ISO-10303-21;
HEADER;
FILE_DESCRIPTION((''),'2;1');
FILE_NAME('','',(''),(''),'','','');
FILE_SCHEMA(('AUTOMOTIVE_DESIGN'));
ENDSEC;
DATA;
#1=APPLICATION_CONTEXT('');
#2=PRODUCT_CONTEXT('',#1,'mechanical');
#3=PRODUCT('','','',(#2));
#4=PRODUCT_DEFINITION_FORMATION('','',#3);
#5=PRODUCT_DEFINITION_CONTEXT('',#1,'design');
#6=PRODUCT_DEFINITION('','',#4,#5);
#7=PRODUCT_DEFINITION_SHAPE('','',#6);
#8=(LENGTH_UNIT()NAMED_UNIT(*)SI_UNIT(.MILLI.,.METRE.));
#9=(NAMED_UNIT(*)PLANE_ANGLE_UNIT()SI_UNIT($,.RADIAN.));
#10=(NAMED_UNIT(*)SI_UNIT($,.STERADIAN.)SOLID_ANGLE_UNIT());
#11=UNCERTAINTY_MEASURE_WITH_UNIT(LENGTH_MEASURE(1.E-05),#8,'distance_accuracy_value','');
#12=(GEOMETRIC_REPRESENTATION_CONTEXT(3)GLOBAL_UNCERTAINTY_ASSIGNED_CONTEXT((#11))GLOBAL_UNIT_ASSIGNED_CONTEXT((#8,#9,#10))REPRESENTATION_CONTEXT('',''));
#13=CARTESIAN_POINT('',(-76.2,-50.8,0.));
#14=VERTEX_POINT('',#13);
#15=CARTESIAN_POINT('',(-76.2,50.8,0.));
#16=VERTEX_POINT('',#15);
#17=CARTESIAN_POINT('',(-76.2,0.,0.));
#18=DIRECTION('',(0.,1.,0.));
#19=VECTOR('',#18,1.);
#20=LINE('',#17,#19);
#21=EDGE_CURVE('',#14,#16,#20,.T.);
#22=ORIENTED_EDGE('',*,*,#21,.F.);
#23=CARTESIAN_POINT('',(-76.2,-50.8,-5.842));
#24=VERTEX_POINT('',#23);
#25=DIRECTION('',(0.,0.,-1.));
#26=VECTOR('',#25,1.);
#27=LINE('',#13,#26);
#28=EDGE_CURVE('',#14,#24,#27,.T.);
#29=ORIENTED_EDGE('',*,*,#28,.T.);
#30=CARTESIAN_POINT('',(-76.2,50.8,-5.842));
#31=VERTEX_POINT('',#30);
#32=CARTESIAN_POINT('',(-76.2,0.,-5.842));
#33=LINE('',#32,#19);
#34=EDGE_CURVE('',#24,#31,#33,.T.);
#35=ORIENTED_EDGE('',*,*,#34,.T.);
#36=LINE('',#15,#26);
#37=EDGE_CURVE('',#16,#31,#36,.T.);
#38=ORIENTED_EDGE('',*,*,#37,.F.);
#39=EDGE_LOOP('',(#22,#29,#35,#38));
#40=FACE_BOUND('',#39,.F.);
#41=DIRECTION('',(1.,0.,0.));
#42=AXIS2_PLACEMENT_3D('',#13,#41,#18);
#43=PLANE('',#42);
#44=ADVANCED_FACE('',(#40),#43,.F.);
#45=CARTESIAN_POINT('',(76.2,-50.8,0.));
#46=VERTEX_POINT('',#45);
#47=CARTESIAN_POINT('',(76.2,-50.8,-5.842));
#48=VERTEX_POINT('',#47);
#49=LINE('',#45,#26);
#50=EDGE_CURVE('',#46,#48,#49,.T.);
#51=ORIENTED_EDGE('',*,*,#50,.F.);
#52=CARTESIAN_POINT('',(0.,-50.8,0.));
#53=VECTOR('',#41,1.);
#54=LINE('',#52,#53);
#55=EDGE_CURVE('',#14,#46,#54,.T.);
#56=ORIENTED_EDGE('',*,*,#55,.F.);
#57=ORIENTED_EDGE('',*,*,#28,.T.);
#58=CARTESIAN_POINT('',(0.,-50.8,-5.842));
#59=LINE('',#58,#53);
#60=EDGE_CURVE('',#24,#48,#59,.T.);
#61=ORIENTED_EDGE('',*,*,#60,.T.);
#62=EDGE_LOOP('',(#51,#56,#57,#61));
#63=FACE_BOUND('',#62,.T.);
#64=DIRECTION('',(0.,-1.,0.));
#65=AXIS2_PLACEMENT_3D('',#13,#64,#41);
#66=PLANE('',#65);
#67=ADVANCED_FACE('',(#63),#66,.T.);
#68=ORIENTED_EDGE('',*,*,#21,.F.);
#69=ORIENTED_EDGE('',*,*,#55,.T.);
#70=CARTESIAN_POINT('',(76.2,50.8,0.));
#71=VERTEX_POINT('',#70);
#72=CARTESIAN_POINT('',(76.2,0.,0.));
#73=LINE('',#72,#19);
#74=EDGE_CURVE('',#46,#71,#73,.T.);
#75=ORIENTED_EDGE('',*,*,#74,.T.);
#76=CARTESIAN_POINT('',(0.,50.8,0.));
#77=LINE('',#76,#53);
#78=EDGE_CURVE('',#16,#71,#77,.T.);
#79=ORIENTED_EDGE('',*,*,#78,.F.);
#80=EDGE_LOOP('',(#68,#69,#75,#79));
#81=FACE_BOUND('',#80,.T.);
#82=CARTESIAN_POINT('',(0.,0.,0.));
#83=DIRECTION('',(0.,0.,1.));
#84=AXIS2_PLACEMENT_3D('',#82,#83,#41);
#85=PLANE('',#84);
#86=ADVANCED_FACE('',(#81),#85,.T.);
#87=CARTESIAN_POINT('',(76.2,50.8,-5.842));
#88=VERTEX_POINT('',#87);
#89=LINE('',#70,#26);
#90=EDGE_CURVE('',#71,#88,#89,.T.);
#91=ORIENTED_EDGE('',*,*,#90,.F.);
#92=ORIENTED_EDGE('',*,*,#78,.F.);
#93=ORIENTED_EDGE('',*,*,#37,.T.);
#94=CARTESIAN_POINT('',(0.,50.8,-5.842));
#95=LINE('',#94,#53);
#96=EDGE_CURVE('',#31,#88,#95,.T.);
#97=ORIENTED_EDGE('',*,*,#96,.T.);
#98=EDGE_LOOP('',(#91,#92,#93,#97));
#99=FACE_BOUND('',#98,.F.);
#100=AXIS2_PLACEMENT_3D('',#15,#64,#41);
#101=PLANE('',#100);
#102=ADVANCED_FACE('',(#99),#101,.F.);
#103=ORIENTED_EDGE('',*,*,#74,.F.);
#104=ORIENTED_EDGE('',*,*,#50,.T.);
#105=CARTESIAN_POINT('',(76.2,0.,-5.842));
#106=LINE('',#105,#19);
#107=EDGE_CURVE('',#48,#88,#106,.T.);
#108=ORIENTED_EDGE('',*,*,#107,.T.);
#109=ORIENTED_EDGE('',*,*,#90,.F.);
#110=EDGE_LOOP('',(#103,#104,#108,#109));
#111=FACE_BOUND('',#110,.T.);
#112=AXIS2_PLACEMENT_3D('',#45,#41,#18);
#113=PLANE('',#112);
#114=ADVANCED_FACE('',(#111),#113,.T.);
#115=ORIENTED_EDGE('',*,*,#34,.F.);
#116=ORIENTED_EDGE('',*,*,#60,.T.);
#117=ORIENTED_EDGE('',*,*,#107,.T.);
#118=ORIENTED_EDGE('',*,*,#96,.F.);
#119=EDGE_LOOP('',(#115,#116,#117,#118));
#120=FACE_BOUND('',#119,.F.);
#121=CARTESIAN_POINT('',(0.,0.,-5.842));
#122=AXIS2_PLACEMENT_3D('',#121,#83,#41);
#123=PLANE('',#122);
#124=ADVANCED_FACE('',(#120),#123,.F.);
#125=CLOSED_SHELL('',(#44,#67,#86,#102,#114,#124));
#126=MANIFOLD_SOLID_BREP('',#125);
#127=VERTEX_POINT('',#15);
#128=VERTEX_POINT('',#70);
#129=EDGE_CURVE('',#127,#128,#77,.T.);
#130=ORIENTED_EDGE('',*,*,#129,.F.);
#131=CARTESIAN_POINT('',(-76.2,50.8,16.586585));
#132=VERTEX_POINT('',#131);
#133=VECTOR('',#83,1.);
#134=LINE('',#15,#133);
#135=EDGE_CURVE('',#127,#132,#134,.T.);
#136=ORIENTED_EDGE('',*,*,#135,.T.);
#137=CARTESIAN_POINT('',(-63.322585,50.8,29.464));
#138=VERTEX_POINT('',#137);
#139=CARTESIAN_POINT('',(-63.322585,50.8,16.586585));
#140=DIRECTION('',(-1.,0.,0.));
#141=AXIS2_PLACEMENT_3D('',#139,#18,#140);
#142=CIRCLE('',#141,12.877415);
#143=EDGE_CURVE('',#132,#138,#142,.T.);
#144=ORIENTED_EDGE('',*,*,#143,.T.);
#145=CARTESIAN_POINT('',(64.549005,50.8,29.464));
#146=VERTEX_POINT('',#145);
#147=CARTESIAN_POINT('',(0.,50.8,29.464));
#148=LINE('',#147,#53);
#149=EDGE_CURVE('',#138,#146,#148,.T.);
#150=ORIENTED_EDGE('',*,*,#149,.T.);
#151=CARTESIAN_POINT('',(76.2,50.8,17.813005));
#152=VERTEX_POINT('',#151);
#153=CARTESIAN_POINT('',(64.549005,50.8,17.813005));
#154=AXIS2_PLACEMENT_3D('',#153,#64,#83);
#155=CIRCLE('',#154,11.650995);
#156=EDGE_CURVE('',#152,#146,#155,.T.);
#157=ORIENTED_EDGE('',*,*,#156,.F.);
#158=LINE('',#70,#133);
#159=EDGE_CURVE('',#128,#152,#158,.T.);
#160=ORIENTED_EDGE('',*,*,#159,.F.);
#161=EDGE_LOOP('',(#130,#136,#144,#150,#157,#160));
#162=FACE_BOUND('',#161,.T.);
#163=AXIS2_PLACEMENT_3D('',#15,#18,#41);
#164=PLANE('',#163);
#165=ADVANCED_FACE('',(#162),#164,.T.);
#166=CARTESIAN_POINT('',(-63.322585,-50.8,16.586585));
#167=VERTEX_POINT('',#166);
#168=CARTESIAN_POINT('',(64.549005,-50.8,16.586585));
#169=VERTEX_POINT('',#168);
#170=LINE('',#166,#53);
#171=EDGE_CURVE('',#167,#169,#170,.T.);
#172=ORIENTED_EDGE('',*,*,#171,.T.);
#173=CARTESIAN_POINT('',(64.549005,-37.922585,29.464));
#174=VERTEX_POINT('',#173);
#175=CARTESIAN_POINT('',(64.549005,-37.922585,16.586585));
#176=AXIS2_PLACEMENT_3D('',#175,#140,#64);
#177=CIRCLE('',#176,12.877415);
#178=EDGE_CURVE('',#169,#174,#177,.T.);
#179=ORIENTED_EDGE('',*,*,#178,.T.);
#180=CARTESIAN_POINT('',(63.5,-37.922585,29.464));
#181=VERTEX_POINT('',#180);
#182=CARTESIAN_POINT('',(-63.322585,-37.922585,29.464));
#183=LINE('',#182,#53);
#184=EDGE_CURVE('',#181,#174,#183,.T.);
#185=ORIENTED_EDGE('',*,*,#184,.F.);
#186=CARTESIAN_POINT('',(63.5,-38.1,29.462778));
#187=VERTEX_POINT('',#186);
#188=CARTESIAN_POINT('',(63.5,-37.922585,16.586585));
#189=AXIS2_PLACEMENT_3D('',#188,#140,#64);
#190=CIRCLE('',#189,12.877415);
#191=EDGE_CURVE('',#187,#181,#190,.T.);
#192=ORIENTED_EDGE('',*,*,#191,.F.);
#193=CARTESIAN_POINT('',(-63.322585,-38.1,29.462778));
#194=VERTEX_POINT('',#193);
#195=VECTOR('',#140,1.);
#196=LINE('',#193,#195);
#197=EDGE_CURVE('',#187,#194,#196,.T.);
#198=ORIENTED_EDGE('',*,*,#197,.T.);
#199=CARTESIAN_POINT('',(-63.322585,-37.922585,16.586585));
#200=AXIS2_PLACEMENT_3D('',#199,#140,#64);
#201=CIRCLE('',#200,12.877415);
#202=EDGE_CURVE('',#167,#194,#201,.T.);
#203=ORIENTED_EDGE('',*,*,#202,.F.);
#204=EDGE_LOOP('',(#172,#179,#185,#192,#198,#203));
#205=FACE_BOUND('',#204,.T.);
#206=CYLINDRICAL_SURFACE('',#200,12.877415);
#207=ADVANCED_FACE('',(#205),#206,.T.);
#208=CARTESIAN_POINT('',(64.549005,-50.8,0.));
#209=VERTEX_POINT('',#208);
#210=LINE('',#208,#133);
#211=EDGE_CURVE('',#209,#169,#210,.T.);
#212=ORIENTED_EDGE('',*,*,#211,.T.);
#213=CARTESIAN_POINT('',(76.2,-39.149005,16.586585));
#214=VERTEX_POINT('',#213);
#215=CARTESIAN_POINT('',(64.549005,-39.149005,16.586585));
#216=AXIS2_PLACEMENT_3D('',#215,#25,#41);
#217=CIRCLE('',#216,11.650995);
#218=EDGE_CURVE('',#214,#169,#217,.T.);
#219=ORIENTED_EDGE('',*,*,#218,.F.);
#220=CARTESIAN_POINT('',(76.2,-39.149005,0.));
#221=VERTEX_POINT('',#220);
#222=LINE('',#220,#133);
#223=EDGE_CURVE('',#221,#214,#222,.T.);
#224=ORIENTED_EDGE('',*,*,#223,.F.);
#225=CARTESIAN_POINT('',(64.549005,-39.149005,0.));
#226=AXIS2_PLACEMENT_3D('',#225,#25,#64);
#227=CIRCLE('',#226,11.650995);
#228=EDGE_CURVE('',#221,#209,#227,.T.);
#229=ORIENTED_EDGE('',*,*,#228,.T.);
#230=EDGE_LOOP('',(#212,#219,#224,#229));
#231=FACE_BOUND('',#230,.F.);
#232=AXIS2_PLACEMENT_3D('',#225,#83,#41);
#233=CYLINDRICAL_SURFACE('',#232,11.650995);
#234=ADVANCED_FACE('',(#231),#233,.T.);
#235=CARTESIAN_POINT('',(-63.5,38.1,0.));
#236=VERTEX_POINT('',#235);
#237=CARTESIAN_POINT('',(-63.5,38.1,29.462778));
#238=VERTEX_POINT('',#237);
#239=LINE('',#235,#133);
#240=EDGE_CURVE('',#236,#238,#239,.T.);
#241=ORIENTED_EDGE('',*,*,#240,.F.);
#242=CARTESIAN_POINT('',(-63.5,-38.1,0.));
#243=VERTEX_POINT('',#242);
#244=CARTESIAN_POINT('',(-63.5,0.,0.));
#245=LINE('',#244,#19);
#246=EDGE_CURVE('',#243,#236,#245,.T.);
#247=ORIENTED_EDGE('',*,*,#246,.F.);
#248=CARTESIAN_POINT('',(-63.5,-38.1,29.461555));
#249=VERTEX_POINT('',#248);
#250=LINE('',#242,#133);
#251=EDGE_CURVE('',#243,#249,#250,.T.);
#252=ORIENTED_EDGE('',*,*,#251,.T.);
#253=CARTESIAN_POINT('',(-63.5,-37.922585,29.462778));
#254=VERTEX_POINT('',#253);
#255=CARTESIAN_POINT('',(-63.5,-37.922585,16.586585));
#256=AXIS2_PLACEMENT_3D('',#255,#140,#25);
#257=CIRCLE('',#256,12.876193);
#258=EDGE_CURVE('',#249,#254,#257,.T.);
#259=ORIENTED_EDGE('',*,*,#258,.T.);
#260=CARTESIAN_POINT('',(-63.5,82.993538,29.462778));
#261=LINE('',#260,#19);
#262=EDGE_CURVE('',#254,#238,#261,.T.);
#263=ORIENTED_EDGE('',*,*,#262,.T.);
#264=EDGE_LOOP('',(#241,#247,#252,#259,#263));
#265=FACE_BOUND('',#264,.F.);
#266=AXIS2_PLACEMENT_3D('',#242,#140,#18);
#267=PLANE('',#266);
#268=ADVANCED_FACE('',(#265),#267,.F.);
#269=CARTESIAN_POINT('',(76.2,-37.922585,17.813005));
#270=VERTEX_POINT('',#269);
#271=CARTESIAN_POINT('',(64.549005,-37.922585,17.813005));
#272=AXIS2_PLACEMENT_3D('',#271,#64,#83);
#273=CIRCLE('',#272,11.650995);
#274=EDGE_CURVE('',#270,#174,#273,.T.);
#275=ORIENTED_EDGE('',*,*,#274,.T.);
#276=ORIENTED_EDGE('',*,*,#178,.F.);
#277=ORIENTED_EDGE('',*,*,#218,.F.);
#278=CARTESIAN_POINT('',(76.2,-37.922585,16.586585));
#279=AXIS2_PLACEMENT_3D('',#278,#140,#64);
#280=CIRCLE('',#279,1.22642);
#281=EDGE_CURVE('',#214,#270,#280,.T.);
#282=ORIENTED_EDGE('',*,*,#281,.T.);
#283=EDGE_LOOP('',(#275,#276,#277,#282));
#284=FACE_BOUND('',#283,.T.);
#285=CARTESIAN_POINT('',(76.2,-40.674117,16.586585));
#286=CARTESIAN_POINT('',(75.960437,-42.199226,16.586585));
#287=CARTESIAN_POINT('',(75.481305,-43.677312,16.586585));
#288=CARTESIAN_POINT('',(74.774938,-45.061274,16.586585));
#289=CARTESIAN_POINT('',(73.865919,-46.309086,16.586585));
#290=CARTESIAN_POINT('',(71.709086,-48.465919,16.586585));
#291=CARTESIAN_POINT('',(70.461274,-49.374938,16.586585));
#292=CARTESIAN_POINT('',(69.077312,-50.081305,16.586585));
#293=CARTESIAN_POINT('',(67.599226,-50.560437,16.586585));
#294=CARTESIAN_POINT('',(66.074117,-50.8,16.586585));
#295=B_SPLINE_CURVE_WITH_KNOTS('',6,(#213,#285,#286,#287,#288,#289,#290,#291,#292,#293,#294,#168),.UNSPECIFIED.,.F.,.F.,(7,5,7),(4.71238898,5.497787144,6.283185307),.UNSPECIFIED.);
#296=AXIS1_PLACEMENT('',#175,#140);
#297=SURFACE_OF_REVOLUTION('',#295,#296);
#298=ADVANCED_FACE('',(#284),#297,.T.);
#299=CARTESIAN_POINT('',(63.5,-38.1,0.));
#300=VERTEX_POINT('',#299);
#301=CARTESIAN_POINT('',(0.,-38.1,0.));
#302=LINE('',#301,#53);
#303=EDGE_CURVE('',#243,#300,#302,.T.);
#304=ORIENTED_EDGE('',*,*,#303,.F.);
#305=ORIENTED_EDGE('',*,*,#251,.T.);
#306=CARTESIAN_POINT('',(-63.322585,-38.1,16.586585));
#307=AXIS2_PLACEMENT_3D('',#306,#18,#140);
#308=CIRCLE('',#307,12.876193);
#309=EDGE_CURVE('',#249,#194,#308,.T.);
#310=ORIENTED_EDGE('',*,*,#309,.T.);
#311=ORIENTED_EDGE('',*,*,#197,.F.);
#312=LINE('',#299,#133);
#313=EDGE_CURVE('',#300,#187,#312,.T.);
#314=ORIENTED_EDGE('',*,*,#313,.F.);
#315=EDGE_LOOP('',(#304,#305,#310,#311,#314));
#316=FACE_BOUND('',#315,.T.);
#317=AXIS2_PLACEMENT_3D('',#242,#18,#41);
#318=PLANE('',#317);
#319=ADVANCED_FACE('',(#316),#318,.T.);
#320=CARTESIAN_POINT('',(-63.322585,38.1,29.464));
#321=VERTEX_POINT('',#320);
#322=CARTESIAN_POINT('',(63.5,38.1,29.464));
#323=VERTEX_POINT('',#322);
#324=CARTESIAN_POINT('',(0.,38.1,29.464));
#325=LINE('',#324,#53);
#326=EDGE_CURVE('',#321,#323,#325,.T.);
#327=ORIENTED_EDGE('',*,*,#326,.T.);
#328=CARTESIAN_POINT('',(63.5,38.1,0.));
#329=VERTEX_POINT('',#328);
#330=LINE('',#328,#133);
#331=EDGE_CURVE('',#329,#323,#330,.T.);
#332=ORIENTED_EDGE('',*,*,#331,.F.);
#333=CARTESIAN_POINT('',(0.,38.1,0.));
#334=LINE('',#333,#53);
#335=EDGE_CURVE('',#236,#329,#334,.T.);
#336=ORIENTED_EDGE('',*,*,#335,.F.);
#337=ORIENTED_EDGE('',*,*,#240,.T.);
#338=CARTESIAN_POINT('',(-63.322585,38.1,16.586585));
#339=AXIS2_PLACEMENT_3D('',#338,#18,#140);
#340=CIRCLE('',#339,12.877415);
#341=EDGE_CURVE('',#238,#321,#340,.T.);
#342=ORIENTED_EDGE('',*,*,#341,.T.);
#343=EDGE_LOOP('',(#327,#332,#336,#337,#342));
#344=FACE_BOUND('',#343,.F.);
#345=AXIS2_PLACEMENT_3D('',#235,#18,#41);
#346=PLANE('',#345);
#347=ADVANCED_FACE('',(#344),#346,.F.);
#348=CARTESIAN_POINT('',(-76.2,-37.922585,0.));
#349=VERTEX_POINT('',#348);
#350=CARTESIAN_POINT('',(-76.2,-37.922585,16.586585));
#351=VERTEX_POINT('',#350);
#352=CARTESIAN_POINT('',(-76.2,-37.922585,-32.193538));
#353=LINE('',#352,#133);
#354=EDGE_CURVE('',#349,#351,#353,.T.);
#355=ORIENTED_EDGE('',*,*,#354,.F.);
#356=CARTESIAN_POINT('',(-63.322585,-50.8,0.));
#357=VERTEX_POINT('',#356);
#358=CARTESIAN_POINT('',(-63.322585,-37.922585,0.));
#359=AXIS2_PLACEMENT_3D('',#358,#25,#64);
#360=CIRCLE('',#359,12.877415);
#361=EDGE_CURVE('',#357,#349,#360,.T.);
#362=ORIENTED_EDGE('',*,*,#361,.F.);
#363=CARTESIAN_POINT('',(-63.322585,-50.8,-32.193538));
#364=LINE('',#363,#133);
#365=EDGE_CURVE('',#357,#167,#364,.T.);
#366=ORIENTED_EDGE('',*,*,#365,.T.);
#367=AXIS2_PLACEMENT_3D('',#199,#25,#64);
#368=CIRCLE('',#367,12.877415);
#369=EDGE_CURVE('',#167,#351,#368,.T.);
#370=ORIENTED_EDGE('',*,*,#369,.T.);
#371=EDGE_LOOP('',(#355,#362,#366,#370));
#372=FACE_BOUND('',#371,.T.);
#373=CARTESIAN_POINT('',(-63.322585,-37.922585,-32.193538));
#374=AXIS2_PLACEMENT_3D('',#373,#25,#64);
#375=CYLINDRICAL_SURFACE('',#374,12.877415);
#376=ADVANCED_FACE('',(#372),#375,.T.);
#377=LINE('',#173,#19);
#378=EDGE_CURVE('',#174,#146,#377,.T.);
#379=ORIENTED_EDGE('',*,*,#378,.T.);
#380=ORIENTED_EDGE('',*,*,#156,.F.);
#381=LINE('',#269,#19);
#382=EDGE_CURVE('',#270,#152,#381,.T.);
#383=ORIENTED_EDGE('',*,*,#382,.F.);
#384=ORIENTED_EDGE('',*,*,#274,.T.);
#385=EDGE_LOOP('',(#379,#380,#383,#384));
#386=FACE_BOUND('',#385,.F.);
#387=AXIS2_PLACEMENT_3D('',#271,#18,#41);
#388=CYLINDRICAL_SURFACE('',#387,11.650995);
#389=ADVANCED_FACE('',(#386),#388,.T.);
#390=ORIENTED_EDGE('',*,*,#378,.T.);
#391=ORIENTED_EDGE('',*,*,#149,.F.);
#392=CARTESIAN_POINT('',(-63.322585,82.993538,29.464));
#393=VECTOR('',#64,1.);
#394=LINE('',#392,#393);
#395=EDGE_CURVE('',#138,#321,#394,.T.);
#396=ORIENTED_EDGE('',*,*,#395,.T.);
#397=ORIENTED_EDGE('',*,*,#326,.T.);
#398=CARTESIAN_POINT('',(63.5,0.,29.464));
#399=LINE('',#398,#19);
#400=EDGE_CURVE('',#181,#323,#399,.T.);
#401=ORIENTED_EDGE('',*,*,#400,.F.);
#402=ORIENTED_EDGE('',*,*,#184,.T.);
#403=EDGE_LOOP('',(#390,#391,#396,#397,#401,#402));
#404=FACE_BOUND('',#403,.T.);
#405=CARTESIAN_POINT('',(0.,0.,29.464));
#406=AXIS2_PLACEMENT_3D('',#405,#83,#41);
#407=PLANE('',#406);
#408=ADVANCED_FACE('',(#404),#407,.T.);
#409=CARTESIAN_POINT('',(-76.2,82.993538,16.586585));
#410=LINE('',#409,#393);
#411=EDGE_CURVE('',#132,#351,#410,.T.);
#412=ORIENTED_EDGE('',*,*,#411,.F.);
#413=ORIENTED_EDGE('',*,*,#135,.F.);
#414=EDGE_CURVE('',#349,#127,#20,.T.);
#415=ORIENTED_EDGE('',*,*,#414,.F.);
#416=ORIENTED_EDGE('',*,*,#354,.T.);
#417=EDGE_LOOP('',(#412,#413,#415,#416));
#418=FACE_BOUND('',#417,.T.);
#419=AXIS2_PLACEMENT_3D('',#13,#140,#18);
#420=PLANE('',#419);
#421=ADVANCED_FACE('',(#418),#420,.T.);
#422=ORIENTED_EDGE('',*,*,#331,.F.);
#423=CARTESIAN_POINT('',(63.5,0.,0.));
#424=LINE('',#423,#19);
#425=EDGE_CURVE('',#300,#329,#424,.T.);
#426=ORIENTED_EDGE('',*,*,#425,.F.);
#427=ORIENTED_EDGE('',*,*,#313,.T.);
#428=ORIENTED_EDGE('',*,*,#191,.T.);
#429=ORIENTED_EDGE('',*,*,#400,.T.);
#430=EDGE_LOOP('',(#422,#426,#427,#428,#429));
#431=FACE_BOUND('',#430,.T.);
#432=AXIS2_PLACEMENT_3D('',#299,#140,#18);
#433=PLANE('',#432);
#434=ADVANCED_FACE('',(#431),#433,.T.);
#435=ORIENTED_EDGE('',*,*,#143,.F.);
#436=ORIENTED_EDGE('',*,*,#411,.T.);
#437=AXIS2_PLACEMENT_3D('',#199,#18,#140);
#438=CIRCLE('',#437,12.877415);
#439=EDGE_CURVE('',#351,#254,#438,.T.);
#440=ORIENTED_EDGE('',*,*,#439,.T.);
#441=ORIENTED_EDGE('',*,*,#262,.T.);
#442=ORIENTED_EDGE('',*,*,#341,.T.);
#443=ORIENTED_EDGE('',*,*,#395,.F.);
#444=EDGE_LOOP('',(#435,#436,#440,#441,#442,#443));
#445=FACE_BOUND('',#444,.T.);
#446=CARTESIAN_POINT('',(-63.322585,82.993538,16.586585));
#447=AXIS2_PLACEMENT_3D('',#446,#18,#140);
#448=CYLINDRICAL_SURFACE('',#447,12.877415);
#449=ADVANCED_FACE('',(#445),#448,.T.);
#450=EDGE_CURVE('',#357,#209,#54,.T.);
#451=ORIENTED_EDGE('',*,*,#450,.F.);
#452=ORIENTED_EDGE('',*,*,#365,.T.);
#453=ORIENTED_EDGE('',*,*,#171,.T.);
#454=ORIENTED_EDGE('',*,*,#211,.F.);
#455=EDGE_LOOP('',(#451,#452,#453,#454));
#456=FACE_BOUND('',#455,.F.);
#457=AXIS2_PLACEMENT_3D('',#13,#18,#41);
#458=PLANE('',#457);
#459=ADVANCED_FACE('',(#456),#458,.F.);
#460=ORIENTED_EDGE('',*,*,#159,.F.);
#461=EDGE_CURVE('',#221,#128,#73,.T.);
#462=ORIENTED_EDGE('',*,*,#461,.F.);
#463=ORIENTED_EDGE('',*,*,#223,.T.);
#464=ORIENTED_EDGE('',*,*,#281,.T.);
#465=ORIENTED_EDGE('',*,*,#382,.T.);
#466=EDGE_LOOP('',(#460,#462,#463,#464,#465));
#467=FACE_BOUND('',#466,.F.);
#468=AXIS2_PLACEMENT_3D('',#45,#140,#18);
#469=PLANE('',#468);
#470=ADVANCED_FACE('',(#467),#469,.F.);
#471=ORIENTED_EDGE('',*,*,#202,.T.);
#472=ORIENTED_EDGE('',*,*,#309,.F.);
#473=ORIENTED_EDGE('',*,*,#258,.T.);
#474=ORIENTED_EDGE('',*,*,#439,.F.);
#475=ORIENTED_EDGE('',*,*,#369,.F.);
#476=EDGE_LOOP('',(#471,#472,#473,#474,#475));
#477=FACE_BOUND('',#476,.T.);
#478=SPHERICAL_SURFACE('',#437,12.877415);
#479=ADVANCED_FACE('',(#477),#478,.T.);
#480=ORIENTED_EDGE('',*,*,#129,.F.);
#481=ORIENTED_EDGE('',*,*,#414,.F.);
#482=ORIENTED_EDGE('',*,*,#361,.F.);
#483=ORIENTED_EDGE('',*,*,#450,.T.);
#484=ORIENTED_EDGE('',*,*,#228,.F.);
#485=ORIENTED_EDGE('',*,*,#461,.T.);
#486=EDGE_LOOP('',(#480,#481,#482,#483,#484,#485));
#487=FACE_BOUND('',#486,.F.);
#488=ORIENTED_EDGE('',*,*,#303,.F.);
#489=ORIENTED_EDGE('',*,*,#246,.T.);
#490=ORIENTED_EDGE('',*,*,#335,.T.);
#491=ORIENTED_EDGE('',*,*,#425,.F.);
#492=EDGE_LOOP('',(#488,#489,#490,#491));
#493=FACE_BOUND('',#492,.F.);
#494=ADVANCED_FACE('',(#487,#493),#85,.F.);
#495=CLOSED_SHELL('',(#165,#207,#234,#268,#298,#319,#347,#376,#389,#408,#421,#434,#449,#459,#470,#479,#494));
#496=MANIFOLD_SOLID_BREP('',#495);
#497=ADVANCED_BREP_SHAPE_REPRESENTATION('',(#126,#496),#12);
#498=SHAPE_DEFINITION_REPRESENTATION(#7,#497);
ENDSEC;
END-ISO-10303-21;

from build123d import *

# Parameters (mm, degrees)
F0_W        = 152.4
F0_H        = 101.6
F0_W_2      = 127
F0_H_2      = 76.2
F1_DEPTH    = 29.464
F2_W        = 152.4
F2_H        = 101.6
F3_DEPTH    = 5.842
F4_T1_DEPTH = 165.9870757085
F5_T1_DEPTH = 171.7161227125
F5_T3_DEPTH = 48.7801227125
F5_T6_ANGLE = 90.0000000015
F6_R        = 11.650994652


# Not quite as in the source:
# - a fillet or chamfer that OpenCascade refuses, or shapes differently, is made with other operations: its cross-section is extruded or revolved along the edge and cut away or added


with BuildPart() as f1:
    # F0 (on Top) → F1 (new body)
    with BuildSketch(Plane.XY):
        Rectangle(F0_W, F0_H)
        Rectangle(F0_W_2, F0_H_2, mode=Mode.SUBTRACT)
    extrude(amount=F1_DEPTH)

    # F4: fillet of radius 12.8774151417 on 1 edges, made by hand

    # F4_s2 → F4_t1 (cut)
    with BuildSketch(Plane.XZ.offset(-82.9935378542)):
        with BuildLine():
            ThreePointArc((-76.2, 16.5865848583), (-72.4282924292, 25.6922924292), (-63.3225848583, 29.464))
            Line((-63.3225848583, 29.464), (-76.2, 29.464))
            Line((-76.2, 29.464), (-76.2, 16.5865848583))
        make_face()
    extrude(amount=F4_T1_DEPTH, mode=Mode.SUBTRACT)

    # F5: fillet of radius 12.8774151417 on 1 edges, made by hand

    # F5_s2 → F5_t1 (cut)
    with BuildSketch(Plane.YZ.offset(-63.3225848583)):
        with BuildLine():
            ThreePointArc((-50.8, 16.5865848583), (-47.0282924292, 25.6922924292), (-37.9225848583, 29.464))
            Line((-37.9225848583, 29.464), (-50.8, 29.464))
            Line((-50.8, 29.464), (-50.8, 16.5865848583))
        make_face()
    extrude(amount=F5_T1_DEPTH, mode=Mode.SUBTRACT)

    # F5_s4 → F5_t3 (cut)
    with BuildSketch(Plane.XY.offset(-32.1935378542)):
        with BuildLine():
            ThreePointArc((-63.3225848583, -50.8), (-72.4282924292, -47.0282924292), (-76.2, -37.9225848583))
            Line((-76.2, -37.9225848583), (-76.2, -50.8))
            Line((-76.2, -50.8), (-63.3225848583, -50.8))
        make_face()
    extrude(amount=F5_T3_DEPTH, mode=Mode.SUBTRACT)

    # F5_s5 → F5_t6 (revolve, cut)
    with BuildSketch(Plane.XY.offset(16.5865848585)):
        with BuildLine():
            ThreePointArc((-63.3225848583, -50.8), (-72.4282924292, -47.0282924292), (-76.2, -37.9225848583))
            Line((-76.2, -37.9225848583), (-76.2, -50.8))
            Line((-76.2, -50.8), (-63.3225848583, -50.8))
        make_face()
    revolve(axis=Axis((-63.3225848585, -50.8, 16.5865848585), (0, 1, 0)), revolution_arc=F5_T6_ANGLE, mode=Mode.SUBTRACT)

    # F6
    f6_edges = [f1.edges().sort_by_distance(p)[0] for p in [
        (76.2, 6.438708, 29.464),
    ]]
    fillet(f6_edges, radius=F6_R)


with BuildPart() as f3:
    # F2 (on Top) → F3 (new body)
    with BuildSketch(Plane.XY):
        Rectangle(F2_W, F2_H)
    extrude(amount=-F3_DEPTH)


solid = Compound([f1.part, f3.part])
